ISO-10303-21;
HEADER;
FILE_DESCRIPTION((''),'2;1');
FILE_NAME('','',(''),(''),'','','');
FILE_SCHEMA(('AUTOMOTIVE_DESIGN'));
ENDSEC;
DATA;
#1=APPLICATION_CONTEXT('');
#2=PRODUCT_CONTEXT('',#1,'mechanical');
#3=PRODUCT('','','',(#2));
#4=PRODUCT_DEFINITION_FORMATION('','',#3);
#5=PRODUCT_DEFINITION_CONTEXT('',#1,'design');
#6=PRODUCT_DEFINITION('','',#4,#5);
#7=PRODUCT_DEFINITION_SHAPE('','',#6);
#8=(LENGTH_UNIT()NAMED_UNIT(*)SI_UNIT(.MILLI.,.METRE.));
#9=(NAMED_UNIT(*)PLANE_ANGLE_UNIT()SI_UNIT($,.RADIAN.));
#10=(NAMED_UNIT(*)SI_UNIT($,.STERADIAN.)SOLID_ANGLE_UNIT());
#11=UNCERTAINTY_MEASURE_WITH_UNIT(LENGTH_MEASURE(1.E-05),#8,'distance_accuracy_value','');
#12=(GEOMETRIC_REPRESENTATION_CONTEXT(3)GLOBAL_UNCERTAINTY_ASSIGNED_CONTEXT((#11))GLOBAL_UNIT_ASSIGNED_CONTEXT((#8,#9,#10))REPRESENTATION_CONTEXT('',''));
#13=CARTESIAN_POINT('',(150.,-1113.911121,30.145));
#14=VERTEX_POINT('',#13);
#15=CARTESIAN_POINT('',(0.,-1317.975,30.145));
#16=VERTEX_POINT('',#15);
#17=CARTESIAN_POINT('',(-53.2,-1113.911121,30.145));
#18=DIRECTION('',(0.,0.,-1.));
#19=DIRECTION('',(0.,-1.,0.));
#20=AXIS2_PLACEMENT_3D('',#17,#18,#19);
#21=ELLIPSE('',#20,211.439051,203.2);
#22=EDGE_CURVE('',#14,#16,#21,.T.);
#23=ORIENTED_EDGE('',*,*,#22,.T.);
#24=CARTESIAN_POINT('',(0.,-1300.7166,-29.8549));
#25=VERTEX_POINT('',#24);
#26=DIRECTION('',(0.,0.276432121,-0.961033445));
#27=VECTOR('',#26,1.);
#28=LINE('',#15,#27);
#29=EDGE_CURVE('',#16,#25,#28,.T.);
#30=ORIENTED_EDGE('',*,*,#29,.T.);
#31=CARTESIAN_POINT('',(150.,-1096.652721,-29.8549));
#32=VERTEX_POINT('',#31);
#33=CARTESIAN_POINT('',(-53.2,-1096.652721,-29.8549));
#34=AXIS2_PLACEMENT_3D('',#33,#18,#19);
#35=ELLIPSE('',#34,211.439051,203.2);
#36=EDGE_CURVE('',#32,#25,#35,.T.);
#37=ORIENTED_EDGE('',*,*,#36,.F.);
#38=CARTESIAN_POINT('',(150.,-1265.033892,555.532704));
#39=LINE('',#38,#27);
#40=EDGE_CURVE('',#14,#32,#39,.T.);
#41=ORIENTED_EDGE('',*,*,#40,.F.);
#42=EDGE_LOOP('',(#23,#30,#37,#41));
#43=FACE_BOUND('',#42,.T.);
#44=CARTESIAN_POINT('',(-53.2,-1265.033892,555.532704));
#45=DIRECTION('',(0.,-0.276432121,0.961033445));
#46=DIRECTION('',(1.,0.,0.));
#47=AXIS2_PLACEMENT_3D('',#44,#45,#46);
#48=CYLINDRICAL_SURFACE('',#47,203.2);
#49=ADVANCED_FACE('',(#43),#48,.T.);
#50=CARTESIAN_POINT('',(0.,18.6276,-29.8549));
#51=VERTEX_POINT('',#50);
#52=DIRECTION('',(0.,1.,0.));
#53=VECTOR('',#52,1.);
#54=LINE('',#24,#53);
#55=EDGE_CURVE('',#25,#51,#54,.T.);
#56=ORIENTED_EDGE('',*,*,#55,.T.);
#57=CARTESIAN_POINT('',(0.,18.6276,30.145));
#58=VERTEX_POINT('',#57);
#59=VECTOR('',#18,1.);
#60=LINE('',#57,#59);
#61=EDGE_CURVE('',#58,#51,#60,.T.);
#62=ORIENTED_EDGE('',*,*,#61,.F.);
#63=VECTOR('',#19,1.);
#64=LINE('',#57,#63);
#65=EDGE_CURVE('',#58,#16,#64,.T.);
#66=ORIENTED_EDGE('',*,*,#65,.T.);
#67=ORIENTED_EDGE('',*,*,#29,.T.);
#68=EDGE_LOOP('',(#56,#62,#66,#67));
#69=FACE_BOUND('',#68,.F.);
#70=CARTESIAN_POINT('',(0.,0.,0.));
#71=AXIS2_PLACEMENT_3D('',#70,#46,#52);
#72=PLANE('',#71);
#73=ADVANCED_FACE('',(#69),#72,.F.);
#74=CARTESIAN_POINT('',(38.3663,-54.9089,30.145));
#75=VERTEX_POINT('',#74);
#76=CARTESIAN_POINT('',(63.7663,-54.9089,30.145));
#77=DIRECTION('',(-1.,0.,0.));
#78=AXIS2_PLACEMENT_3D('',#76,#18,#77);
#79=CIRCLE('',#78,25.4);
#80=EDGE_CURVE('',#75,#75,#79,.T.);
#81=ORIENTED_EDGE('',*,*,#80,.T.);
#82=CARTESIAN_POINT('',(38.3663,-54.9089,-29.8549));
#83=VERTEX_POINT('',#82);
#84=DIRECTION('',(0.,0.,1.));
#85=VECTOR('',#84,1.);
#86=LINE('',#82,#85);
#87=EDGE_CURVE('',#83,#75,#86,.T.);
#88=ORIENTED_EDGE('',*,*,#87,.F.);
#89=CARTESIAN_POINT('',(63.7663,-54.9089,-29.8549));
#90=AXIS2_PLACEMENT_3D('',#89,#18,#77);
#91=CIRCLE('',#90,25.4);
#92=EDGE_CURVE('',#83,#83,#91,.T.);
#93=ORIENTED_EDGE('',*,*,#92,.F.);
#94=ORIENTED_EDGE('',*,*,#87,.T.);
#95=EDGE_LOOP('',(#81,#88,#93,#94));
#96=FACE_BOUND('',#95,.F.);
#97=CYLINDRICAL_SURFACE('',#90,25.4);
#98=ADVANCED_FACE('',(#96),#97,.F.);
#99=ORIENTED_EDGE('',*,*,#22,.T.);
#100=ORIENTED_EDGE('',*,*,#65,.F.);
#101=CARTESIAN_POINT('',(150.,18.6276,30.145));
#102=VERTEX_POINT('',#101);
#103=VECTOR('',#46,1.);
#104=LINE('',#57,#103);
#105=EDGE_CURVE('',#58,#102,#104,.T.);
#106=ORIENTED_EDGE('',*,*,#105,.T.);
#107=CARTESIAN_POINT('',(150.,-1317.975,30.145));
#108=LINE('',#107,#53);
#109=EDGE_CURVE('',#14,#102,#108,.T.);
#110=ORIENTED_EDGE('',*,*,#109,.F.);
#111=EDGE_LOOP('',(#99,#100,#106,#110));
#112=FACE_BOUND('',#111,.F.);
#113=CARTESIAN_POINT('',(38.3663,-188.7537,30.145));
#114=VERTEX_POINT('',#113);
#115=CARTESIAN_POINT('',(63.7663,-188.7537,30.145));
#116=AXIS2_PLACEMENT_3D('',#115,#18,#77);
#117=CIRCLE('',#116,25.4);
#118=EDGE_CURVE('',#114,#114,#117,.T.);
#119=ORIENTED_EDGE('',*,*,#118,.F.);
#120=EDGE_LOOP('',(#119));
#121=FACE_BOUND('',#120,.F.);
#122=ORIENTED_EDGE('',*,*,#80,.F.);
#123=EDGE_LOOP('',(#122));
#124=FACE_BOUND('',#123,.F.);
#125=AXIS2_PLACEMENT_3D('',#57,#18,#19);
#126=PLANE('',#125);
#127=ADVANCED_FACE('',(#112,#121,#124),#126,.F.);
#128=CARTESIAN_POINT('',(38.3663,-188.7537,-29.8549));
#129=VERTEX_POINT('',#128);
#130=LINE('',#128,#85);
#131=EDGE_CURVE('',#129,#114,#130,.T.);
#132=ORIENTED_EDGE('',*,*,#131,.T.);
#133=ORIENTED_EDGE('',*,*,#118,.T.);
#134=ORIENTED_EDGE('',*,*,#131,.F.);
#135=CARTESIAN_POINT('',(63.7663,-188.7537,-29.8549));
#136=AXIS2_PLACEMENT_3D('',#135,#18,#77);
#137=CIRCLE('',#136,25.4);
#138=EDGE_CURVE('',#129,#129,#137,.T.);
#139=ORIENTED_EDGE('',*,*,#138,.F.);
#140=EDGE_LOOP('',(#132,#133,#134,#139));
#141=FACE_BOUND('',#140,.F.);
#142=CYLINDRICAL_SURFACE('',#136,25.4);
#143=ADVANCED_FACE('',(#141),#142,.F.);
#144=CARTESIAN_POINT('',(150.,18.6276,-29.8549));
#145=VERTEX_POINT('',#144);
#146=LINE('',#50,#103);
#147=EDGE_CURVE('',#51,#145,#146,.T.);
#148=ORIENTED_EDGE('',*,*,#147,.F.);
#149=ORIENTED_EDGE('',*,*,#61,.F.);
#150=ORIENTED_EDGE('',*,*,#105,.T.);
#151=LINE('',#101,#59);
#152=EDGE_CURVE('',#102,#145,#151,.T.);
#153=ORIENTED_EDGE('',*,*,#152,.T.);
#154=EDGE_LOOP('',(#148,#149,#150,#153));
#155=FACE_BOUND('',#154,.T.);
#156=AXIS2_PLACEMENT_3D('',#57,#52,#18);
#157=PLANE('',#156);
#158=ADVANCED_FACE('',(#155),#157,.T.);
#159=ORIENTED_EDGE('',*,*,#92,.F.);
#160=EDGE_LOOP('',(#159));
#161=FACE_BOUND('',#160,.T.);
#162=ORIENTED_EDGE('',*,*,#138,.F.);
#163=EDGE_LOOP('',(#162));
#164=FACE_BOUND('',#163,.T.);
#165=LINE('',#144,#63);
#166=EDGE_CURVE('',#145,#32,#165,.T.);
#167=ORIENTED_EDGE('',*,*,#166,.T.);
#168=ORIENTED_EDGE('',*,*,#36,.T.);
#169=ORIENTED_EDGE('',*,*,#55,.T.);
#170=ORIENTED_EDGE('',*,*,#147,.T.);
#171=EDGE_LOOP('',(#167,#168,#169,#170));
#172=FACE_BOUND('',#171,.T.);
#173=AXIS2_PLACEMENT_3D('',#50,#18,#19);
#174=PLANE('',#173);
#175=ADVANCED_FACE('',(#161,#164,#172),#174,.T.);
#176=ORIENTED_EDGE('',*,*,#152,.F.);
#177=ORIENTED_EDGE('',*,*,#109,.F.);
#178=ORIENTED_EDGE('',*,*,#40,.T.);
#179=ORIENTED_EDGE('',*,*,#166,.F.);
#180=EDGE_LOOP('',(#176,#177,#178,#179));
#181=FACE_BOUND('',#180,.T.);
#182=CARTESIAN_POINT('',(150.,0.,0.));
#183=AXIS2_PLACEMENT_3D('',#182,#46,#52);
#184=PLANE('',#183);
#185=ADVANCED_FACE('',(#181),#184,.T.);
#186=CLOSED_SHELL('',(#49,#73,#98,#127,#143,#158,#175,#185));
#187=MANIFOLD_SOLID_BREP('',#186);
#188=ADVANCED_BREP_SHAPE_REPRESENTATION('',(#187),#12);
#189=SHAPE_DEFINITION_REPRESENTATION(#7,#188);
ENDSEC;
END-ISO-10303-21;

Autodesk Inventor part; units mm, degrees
ref_plane "YZ Plane" through (0, 0, 0) normal (1, 0, 0) x (0, 1, 0)
ref_plane "XZ Plane" through (0, 0, 0) normal (0, 1, 0) x (-1, 0, 0)
ref_plane "XY Plane" through (0, 0, 0) normal (0, 0, 1) x (1, 0, 0)
sketch "Sketch1" plane through (0, 0, 0) normal (1, 0, 0) x (0, 1, 0)
  line L0 (18.6276, 30.145) -> (-681.3735, 30.145)
  line L1 (18.6276, 30.145) -> (18.6276, -29.8549)
  line L2 (18.6276, -29.8549) -> (-681.3735, -29.8549)
  line L3 (-681.3735, 30.145) -> (-1317.975, 30.145)
  line L4 (-1317.975, 30.145) -> (-1300.7166, -29.8549)
  line L5 (-1300.7166, -29.8549) -> (-681.3735, -29.8549)
  point P0 (0, 0)
  dimension "d0" = 700.0011
  dimension "d1" = 59.9999
extrude "Extrusion1" add sketch "Sketch1" along normal blind 150
sketch "Sketch2" plane through (0, 18.6276, 30.145) normal (0, 1, 0) x (1, 0, 0)
  line L0 (30.0948, 48.0392) -> (130.9532, 48.0392) construction
  line L1 (130.9532, 48.0392) -> (130.9532, 12.2508) construction
  line L2 (130.9532, 12.2508) -> (30.0948, 12.2508) construction
  line L3 (30.0948, 12.2508) -> (30.0948, 48.0392) construction
  point P0 (0, 30.145)
fillet "Fillet1" [suppressed]
chamfer "Chamfer1" [suppressed]
sketch "Sketch3" plane through (150, 18.6276, -29.8549) normal (0, 0, -1) x (-1, 0, 0)
  circle A0 centre (86.2337, -73.5365) radius 25.4
  circle A1 centre (86.2337, -207.3813) radius 25.4
  point P0 (150, -18.6276)
  dimension "d8" = 50.8
  dimension "d9" = 50.8
extrude "Extrusion2" cut sketch "Sketch3" against normal blind 150
fillet "Fillet2" radius 203.2 1 edges at (150, -1309.3458, 0.1451)
properties part number "legplate" material "Steel, High Strength, Low Alloy"
